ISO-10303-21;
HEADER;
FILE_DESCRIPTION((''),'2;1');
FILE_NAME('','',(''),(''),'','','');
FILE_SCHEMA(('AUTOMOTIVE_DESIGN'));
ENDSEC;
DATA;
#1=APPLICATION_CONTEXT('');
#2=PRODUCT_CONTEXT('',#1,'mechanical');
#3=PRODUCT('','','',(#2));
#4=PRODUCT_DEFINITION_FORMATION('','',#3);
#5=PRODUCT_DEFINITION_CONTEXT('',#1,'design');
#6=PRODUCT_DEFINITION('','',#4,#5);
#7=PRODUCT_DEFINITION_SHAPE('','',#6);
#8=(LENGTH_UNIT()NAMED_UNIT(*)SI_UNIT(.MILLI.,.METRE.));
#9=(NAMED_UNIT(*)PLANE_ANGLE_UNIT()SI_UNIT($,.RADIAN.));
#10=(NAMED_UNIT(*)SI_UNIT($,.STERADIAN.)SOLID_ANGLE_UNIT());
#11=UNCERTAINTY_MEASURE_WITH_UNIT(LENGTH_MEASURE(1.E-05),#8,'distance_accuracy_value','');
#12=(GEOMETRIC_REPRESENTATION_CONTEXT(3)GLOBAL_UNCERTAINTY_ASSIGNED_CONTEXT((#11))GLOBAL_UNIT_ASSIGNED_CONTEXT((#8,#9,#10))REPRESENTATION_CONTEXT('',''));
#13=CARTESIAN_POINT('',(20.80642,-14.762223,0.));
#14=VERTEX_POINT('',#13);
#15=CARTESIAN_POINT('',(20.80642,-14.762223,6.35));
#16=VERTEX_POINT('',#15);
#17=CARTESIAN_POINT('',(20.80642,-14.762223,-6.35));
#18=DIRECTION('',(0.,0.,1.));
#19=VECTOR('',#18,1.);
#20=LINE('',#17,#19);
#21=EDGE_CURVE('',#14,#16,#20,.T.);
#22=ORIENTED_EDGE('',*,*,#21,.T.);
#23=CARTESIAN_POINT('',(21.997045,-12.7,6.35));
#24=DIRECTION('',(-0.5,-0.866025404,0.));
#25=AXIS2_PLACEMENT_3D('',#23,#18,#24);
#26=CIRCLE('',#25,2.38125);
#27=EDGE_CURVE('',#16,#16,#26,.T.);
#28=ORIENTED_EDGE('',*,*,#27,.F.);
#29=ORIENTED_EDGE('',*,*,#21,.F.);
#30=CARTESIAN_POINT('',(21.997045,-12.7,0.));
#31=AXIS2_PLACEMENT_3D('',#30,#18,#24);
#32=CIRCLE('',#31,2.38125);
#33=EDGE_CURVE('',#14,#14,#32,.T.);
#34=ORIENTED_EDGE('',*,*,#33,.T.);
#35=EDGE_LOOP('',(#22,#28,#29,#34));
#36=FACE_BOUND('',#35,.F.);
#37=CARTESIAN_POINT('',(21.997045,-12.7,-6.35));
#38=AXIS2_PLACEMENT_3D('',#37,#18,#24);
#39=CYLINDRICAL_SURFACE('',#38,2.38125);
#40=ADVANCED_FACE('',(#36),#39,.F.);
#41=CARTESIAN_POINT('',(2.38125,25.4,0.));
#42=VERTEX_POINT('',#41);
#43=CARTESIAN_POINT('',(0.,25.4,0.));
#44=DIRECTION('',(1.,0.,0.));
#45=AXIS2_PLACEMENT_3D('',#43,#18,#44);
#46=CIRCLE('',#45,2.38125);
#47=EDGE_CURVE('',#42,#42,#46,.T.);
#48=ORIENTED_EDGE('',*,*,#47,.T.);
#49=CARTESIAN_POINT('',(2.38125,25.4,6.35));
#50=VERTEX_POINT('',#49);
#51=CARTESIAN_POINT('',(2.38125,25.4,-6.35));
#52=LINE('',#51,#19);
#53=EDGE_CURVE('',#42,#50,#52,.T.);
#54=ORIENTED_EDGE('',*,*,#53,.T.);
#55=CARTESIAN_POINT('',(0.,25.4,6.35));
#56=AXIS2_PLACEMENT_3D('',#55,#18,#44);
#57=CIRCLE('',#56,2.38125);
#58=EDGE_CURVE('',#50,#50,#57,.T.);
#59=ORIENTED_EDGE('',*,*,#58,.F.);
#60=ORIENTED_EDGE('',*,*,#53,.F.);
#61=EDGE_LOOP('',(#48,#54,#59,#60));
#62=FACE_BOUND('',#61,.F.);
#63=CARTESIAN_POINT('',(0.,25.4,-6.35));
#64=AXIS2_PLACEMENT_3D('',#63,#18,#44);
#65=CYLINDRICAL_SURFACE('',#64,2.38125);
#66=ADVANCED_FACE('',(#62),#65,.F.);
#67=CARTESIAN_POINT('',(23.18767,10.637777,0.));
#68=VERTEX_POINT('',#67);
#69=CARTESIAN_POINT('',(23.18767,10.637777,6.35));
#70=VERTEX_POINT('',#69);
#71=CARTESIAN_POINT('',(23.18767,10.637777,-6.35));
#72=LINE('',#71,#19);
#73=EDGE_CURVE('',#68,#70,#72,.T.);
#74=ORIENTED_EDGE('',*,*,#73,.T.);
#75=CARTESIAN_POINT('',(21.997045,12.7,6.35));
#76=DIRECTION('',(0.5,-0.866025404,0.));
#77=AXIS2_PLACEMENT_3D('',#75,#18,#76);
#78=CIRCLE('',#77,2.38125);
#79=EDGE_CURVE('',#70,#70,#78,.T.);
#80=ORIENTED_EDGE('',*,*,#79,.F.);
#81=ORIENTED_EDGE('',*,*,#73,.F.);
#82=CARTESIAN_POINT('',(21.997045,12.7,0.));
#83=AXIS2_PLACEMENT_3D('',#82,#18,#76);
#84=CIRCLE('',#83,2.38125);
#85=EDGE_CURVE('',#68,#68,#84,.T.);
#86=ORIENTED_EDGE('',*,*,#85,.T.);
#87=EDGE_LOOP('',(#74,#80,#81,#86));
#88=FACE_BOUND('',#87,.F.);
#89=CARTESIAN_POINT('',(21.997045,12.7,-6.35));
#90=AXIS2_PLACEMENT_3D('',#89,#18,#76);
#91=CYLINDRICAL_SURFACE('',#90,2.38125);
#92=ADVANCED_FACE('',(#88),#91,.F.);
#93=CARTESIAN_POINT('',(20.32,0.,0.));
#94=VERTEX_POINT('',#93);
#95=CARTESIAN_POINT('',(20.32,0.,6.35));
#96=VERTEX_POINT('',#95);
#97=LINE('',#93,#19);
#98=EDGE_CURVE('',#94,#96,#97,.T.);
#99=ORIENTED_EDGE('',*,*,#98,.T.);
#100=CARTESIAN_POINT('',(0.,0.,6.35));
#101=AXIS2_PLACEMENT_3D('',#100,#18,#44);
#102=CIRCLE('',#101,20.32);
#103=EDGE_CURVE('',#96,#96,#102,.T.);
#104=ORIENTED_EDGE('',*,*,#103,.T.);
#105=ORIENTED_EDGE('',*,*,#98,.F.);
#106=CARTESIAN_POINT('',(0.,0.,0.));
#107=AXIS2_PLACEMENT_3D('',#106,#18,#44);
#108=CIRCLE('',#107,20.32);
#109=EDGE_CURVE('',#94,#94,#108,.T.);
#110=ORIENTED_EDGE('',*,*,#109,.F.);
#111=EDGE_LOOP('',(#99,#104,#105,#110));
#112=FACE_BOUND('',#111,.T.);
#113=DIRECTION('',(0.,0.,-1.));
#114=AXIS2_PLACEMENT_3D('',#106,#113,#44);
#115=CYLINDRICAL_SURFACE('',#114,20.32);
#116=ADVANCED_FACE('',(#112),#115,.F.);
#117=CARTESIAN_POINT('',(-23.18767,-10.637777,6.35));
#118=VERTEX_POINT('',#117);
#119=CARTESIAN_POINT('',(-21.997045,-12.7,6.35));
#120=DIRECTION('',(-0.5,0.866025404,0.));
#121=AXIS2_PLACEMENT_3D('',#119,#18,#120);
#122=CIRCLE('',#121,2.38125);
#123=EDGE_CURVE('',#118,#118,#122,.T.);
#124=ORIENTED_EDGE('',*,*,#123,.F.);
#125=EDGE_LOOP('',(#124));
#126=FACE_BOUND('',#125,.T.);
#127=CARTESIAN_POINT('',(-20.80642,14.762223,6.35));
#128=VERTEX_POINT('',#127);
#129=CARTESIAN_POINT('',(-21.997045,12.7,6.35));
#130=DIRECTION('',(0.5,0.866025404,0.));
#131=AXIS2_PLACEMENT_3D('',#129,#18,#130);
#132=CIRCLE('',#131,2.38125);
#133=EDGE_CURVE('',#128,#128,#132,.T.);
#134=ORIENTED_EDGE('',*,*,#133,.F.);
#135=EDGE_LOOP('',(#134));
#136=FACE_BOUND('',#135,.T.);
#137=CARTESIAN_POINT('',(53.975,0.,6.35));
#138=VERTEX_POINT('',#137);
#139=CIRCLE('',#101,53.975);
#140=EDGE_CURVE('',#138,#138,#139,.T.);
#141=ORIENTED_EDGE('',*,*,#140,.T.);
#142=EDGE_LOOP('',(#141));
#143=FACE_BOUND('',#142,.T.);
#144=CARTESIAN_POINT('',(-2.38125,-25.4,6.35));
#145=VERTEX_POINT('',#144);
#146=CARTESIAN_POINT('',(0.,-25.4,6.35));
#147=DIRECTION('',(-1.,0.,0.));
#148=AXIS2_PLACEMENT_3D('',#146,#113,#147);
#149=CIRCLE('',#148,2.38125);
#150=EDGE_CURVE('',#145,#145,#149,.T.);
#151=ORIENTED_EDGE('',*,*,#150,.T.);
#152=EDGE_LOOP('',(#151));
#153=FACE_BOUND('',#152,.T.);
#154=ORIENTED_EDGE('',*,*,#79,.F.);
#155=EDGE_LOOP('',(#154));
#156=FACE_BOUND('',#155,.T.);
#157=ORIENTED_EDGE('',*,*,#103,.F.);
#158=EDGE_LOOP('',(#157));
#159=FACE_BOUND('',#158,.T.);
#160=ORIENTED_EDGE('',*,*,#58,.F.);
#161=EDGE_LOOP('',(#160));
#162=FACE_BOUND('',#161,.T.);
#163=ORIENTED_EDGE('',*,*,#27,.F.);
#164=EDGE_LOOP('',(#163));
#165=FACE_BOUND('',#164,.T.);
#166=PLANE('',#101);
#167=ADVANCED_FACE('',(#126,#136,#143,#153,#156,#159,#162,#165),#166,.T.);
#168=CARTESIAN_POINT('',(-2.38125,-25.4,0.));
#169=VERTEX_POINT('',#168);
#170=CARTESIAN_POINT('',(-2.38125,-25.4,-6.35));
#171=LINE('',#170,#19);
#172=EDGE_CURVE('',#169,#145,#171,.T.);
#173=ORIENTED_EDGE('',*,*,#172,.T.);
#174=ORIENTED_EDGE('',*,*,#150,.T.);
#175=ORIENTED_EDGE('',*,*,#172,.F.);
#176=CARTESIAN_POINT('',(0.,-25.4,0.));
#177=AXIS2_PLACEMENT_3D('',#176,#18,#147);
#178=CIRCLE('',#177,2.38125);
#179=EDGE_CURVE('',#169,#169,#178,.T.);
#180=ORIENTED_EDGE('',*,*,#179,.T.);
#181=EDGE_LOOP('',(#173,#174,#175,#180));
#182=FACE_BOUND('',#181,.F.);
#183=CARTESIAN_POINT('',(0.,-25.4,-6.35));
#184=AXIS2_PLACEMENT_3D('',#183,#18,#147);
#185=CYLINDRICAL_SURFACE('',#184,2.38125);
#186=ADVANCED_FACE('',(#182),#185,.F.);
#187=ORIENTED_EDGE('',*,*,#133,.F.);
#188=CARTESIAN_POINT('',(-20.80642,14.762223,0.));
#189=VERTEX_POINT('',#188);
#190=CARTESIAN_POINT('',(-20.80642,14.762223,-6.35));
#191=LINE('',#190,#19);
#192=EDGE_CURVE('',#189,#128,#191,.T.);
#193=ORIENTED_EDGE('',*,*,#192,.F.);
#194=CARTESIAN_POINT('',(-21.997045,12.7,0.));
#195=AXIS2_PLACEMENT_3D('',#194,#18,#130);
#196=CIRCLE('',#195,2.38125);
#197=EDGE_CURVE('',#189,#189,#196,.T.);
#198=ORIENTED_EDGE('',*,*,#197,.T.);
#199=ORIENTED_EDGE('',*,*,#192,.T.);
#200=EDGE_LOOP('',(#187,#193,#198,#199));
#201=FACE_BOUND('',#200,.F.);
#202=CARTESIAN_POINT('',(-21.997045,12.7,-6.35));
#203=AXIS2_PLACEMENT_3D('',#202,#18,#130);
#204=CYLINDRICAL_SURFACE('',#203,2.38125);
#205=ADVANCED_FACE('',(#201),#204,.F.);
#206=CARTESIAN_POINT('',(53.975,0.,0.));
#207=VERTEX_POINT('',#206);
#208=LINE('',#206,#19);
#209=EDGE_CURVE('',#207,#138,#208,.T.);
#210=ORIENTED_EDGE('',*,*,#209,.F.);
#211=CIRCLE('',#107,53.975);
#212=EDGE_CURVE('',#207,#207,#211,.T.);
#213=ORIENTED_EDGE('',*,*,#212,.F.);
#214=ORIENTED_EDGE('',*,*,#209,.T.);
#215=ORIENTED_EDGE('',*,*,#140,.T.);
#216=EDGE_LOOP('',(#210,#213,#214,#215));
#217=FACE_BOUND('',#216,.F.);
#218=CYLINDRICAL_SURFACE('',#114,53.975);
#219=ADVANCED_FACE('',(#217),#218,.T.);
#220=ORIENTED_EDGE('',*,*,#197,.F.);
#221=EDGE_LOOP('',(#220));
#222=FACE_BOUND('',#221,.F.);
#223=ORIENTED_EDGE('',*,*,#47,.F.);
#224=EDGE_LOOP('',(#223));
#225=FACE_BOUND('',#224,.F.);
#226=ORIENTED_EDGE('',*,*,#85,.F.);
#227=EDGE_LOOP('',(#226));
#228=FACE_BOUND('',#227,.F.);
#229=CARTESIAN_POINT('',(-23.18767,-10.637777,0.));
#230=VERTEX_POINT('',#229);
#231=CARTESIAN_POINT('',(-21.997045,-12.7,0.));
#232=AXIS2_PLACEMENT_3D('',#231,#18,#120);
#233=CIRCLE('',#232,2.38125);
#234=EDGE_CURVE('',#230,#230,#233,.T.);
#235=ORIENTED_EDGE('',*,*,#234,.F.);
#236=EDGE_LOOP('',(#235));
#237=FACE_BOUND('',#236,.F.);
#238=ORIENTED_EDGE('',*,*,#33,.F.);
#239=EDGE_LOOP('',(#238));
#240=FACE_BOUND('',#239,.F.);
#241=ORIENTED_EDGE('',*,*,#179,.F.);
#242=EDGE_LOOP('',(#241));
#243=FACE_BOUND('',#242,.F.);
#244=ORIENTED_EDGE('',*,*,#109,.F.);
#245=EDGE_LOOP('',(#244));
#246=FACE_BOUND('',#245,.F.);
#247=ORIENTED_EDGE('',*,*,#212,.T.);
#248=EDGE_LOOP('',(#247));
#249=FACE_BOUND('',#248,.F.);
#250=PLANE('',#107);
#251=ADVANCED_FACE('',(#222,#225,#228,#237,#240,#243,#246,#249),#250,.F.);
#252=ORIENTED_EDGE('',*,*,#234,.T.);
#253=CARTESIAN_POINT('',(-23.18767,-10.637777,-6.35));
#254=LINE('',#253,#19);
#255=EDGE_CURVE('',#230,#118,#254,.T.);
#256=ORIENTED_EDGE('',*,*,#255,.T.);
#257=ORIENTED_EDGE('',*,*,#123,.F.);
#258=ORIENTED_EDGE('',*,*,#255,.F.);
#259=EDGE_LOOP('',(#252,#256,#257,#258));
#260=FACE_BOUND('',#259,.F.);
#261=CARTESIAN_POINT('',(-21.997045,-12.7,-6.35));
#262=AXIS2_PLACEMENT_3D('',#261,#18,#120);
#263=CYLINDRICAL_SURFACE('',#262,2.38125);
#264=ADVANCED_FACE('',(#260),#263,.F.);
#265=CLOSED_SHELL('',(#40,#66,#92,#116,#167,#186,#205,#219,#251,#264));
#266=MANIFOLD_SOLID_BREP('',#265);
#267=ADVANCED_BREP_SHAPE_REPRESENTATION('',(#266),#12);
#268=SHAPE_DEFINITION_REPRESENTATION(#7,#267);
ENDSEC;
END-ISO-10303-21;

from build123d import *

# Parameters (mm, degrees)
F0_R            = 53.975
F0_R_2          = 20.32
F1_DEPTH        = 6.35
F2_D            = 4.7625
F2_DEPTH        = 6.35
F2_TIP          = 1.4307993491
F2_COPIES_COUNT = 6


# Not quite as in the source:
# - a pattern or mirror of a feature is missing from the dataset's text; its kind, count and spacing are read off the source's solid


with BuildPart() as f1:
    # F0 (on Top) → F1 (new body)
    with BuildSketch(Plane.XY):
        Circle(F0_R)
        Circle(F0_R_2, mode=Mode.SUBTRACT)
    extrude(amount=F1_DEPTH)

    # F2
    with Locations(Plane(origin=(0, 0, 0), x_dir=(1, 0, 0), z_dir=(0, 0, -1))):
        with Locations((0, 25.4)):
            f2 = Hole(F2_D / 2, depth=F2_DEPTH)
            with Locations((0, 0, -(F2_DEPTH + F2_TIP / 2))):  # 118° drill point
                Cone(0, F2_D / 2, F2_TIP, mode=Mode.SUBTRACT)

    # F2_copies: F2 ×6 about axis
    f2_copies_axis = Axis((0, 0, 0), (0, 0, 1))
    for i in range(1, F2_COPIES_COUNT):
        add(f2.rotate(f2_copies_axis, i * 360 / F2_COPIES_COUNT), mode=Mode.SUBTRACT)


solid = f1.part
